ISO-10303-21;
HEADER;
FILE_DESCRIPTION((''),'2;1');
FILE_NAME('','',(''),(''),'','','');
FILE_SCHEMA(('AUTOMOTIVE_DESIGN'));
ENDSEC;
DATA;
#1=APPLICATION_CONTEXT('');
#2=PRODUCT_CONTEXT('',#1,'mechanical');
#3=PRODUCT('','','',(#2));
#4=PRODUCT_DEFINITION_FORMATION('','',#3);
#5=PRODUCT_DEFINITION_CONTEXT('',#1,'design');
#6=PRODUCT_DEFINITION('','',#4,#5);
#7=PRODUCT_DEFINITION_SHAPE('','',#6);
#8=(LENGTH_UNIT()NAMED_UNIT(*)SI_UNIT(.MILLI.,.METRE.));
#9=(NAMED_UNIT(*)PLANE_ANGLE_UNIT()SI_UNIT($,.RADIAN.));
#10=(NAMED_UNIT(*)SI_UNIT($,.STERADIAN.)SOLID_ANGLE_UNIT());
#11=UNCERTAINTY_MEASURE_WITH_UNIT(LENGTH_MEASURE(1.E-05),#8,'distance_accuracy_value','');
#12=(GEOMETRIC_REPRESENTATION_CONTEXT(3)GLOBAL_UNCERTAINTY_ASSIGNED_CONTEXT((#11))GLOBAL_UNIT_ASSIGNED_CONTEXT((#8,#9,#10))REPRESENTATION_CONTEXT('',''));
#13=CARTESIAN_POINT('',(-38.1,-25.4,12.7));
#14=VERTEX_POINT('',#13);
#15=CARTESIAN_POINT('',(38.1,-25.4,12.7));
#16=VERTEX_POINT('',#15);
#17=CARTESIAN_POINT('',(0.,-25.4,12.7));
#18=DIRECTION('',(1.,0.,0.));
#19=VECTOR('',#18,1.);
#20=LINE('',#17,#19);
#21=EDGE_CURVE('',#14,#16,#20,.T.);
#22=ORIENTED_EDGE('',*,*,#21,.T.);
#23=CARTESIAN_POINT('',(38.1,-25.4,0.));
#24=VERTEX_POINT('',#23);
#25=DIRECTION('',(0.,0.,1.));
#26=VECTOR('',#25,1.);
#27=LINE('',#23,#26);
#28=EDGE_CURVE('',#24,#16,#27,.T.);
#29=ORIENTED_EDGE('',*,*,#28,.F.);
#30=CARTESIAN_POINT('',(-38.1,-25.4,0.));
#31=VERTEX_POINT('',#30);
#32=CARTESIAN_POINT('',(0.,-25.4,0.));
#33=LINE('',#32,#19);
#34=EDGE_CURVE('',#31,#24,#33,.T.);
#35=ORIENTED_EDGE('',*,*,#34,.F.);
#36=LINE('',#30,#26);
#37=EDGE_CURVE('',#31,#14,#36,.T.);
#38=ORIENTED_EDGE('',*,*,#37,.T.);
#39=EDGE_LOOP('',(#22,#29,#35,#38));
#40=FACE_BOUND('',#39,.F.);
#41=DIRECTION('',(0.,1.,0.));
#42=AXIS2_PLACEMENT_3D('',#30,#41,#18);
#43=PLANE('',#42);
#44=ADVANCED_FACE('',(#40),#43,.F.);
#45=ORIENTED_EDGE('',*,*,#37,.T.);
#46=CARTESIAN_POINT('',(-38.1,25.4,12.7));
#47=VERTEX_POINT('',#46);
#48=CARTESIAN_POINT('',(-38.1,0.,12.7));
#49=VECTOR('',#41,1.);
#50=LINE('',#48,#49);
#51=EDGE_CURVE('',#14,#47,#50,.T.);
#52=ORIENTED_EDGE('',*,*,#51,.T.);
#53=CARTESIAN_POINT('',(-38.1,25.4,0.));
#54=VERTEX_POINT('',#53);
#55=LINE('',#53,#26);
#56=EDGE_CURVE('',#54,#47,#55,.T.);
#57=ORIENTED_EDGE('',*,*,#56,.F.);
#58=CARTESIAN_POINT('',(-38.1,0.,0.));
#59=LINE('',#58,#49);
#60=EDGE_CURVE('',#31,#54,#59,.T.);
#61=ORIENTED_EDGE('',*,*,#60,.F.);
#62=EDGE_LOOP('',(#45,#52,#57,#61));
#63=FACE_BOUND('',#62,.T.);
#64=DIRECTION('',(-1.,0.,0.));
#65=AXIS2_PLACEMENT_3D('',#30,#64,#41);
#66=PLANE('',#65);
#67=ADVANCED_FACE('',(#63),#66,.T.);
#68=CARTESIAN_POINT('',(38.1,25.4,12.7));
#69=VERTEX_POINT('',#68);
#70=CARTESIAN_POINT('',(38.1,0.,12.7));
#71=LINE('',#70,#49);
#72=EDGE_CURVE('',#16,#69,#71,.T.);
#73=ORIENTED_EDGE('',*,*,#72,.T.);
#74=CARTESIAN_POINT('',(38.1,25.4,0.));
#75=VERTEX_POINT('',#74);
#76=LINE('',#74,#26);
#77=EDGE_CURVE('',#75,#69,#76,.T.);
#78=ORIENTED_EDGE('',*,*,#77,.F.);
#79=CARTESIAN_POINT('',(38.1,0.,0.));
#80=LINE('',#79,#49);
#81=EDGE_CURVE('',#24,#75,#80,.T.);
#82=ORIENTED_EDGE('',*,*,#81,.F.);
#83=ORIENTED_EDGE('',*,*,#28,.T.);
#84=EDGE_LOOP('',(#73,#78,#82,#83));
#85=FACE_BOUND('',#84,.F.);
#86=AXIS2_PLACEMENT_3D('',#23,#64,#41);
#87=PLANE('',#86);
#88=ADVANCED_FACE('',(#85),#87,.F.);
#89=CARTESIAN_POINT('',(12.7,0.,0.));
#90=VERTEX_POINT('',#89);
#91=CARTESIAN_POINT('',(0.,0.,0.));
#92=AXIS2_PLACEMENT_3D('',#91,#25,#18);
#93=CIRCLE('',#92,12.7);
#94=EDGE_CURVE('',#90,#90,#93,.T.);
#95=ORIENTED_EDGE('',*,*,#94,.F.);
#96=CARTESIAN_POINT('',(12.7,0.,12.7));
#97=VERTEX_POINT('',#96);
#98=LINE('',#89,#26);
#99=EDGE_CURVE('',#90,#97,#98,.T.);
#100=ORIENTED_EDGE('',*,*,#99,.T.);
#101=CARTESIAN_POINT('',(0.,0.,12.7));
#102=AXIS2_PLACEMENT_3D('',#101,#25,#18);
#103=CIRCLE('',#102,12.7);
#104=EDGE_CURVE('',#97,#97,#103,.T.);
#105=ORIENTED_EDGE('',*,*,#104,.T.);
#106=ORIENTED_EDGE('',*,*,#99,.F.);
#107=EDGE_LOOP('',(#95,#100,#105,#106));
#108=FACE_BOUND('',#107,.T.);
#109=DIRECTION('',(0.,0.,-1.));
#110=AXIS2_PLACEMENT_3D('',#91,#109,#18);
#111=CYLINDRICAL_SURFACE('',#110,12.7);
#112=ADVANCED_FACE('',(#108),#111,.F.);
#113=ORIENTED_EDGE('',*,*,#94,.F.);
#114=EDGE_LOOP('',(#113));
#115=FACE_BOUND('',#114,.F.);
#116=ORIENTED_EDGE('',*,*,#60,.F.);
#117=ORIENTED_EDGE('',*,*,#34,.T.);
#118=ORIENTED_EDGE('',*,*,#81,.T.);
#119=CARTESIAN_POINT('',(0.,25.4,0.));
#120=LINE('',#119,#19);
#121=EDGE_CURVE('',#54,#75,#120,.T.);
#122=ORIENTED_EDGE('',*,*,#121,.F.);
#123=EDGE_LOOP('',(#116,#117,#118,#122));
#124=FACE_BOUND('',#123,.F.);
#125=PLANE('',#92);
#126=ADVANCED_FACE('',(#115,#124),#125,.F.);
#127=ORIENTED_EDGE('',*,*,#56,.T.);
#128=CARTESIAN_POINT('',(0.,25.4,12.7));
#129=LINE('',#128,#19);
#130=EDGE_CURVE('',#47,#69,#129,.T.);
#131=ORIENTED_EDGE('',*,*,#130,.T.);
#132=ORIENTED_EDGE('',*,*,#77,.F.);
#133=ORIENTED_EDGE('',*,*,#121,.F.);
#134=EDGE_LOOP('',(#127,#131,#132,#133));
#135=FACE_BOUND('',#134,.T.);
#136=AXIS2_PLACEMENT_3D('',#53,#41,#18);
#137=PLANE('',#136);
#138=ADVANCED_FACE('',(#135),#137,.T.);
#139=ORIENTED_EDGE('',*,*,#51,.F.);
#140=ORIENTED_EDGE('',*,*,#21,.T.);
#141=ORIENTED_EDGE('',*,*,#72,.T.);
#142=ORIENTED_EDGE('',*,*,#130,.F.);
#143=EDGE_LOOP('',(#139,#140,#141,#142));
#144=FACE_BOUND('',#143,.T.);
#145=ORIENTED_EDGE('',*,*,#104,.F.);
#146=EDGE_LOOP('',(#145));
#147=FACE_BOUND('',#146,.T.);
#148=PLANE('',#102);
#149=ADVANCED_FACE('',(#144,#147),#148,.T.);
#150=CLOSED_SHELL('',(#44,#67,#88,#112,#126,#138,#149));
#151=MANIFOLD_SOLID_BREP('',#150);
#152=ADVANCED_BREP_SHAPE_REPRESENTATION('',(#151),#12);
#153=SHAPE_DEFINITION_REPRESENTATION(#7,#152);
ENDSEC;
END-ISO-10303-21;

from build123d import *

# Parameters (mm, degrees)
F0_W     = 76.2
F0_H     = 50.8
F0_R     = 12.7
F1_DEPTH = 12.7


# Not quite as in the source:
# - a feature of the source that left no trace in its solid (it failed there, or was rolled back) is left out


with BuildPart() as f1:
    # F0 (on Top) → F1 (new body)
    with BuildSketch(Plane.XY):
        Rectangle(F0_W, F0_H)
        Circle(F0_R, mode=Mode.SUBTRACT)
    extrude(amount=F1_DEPTH)


solid = f1.part
